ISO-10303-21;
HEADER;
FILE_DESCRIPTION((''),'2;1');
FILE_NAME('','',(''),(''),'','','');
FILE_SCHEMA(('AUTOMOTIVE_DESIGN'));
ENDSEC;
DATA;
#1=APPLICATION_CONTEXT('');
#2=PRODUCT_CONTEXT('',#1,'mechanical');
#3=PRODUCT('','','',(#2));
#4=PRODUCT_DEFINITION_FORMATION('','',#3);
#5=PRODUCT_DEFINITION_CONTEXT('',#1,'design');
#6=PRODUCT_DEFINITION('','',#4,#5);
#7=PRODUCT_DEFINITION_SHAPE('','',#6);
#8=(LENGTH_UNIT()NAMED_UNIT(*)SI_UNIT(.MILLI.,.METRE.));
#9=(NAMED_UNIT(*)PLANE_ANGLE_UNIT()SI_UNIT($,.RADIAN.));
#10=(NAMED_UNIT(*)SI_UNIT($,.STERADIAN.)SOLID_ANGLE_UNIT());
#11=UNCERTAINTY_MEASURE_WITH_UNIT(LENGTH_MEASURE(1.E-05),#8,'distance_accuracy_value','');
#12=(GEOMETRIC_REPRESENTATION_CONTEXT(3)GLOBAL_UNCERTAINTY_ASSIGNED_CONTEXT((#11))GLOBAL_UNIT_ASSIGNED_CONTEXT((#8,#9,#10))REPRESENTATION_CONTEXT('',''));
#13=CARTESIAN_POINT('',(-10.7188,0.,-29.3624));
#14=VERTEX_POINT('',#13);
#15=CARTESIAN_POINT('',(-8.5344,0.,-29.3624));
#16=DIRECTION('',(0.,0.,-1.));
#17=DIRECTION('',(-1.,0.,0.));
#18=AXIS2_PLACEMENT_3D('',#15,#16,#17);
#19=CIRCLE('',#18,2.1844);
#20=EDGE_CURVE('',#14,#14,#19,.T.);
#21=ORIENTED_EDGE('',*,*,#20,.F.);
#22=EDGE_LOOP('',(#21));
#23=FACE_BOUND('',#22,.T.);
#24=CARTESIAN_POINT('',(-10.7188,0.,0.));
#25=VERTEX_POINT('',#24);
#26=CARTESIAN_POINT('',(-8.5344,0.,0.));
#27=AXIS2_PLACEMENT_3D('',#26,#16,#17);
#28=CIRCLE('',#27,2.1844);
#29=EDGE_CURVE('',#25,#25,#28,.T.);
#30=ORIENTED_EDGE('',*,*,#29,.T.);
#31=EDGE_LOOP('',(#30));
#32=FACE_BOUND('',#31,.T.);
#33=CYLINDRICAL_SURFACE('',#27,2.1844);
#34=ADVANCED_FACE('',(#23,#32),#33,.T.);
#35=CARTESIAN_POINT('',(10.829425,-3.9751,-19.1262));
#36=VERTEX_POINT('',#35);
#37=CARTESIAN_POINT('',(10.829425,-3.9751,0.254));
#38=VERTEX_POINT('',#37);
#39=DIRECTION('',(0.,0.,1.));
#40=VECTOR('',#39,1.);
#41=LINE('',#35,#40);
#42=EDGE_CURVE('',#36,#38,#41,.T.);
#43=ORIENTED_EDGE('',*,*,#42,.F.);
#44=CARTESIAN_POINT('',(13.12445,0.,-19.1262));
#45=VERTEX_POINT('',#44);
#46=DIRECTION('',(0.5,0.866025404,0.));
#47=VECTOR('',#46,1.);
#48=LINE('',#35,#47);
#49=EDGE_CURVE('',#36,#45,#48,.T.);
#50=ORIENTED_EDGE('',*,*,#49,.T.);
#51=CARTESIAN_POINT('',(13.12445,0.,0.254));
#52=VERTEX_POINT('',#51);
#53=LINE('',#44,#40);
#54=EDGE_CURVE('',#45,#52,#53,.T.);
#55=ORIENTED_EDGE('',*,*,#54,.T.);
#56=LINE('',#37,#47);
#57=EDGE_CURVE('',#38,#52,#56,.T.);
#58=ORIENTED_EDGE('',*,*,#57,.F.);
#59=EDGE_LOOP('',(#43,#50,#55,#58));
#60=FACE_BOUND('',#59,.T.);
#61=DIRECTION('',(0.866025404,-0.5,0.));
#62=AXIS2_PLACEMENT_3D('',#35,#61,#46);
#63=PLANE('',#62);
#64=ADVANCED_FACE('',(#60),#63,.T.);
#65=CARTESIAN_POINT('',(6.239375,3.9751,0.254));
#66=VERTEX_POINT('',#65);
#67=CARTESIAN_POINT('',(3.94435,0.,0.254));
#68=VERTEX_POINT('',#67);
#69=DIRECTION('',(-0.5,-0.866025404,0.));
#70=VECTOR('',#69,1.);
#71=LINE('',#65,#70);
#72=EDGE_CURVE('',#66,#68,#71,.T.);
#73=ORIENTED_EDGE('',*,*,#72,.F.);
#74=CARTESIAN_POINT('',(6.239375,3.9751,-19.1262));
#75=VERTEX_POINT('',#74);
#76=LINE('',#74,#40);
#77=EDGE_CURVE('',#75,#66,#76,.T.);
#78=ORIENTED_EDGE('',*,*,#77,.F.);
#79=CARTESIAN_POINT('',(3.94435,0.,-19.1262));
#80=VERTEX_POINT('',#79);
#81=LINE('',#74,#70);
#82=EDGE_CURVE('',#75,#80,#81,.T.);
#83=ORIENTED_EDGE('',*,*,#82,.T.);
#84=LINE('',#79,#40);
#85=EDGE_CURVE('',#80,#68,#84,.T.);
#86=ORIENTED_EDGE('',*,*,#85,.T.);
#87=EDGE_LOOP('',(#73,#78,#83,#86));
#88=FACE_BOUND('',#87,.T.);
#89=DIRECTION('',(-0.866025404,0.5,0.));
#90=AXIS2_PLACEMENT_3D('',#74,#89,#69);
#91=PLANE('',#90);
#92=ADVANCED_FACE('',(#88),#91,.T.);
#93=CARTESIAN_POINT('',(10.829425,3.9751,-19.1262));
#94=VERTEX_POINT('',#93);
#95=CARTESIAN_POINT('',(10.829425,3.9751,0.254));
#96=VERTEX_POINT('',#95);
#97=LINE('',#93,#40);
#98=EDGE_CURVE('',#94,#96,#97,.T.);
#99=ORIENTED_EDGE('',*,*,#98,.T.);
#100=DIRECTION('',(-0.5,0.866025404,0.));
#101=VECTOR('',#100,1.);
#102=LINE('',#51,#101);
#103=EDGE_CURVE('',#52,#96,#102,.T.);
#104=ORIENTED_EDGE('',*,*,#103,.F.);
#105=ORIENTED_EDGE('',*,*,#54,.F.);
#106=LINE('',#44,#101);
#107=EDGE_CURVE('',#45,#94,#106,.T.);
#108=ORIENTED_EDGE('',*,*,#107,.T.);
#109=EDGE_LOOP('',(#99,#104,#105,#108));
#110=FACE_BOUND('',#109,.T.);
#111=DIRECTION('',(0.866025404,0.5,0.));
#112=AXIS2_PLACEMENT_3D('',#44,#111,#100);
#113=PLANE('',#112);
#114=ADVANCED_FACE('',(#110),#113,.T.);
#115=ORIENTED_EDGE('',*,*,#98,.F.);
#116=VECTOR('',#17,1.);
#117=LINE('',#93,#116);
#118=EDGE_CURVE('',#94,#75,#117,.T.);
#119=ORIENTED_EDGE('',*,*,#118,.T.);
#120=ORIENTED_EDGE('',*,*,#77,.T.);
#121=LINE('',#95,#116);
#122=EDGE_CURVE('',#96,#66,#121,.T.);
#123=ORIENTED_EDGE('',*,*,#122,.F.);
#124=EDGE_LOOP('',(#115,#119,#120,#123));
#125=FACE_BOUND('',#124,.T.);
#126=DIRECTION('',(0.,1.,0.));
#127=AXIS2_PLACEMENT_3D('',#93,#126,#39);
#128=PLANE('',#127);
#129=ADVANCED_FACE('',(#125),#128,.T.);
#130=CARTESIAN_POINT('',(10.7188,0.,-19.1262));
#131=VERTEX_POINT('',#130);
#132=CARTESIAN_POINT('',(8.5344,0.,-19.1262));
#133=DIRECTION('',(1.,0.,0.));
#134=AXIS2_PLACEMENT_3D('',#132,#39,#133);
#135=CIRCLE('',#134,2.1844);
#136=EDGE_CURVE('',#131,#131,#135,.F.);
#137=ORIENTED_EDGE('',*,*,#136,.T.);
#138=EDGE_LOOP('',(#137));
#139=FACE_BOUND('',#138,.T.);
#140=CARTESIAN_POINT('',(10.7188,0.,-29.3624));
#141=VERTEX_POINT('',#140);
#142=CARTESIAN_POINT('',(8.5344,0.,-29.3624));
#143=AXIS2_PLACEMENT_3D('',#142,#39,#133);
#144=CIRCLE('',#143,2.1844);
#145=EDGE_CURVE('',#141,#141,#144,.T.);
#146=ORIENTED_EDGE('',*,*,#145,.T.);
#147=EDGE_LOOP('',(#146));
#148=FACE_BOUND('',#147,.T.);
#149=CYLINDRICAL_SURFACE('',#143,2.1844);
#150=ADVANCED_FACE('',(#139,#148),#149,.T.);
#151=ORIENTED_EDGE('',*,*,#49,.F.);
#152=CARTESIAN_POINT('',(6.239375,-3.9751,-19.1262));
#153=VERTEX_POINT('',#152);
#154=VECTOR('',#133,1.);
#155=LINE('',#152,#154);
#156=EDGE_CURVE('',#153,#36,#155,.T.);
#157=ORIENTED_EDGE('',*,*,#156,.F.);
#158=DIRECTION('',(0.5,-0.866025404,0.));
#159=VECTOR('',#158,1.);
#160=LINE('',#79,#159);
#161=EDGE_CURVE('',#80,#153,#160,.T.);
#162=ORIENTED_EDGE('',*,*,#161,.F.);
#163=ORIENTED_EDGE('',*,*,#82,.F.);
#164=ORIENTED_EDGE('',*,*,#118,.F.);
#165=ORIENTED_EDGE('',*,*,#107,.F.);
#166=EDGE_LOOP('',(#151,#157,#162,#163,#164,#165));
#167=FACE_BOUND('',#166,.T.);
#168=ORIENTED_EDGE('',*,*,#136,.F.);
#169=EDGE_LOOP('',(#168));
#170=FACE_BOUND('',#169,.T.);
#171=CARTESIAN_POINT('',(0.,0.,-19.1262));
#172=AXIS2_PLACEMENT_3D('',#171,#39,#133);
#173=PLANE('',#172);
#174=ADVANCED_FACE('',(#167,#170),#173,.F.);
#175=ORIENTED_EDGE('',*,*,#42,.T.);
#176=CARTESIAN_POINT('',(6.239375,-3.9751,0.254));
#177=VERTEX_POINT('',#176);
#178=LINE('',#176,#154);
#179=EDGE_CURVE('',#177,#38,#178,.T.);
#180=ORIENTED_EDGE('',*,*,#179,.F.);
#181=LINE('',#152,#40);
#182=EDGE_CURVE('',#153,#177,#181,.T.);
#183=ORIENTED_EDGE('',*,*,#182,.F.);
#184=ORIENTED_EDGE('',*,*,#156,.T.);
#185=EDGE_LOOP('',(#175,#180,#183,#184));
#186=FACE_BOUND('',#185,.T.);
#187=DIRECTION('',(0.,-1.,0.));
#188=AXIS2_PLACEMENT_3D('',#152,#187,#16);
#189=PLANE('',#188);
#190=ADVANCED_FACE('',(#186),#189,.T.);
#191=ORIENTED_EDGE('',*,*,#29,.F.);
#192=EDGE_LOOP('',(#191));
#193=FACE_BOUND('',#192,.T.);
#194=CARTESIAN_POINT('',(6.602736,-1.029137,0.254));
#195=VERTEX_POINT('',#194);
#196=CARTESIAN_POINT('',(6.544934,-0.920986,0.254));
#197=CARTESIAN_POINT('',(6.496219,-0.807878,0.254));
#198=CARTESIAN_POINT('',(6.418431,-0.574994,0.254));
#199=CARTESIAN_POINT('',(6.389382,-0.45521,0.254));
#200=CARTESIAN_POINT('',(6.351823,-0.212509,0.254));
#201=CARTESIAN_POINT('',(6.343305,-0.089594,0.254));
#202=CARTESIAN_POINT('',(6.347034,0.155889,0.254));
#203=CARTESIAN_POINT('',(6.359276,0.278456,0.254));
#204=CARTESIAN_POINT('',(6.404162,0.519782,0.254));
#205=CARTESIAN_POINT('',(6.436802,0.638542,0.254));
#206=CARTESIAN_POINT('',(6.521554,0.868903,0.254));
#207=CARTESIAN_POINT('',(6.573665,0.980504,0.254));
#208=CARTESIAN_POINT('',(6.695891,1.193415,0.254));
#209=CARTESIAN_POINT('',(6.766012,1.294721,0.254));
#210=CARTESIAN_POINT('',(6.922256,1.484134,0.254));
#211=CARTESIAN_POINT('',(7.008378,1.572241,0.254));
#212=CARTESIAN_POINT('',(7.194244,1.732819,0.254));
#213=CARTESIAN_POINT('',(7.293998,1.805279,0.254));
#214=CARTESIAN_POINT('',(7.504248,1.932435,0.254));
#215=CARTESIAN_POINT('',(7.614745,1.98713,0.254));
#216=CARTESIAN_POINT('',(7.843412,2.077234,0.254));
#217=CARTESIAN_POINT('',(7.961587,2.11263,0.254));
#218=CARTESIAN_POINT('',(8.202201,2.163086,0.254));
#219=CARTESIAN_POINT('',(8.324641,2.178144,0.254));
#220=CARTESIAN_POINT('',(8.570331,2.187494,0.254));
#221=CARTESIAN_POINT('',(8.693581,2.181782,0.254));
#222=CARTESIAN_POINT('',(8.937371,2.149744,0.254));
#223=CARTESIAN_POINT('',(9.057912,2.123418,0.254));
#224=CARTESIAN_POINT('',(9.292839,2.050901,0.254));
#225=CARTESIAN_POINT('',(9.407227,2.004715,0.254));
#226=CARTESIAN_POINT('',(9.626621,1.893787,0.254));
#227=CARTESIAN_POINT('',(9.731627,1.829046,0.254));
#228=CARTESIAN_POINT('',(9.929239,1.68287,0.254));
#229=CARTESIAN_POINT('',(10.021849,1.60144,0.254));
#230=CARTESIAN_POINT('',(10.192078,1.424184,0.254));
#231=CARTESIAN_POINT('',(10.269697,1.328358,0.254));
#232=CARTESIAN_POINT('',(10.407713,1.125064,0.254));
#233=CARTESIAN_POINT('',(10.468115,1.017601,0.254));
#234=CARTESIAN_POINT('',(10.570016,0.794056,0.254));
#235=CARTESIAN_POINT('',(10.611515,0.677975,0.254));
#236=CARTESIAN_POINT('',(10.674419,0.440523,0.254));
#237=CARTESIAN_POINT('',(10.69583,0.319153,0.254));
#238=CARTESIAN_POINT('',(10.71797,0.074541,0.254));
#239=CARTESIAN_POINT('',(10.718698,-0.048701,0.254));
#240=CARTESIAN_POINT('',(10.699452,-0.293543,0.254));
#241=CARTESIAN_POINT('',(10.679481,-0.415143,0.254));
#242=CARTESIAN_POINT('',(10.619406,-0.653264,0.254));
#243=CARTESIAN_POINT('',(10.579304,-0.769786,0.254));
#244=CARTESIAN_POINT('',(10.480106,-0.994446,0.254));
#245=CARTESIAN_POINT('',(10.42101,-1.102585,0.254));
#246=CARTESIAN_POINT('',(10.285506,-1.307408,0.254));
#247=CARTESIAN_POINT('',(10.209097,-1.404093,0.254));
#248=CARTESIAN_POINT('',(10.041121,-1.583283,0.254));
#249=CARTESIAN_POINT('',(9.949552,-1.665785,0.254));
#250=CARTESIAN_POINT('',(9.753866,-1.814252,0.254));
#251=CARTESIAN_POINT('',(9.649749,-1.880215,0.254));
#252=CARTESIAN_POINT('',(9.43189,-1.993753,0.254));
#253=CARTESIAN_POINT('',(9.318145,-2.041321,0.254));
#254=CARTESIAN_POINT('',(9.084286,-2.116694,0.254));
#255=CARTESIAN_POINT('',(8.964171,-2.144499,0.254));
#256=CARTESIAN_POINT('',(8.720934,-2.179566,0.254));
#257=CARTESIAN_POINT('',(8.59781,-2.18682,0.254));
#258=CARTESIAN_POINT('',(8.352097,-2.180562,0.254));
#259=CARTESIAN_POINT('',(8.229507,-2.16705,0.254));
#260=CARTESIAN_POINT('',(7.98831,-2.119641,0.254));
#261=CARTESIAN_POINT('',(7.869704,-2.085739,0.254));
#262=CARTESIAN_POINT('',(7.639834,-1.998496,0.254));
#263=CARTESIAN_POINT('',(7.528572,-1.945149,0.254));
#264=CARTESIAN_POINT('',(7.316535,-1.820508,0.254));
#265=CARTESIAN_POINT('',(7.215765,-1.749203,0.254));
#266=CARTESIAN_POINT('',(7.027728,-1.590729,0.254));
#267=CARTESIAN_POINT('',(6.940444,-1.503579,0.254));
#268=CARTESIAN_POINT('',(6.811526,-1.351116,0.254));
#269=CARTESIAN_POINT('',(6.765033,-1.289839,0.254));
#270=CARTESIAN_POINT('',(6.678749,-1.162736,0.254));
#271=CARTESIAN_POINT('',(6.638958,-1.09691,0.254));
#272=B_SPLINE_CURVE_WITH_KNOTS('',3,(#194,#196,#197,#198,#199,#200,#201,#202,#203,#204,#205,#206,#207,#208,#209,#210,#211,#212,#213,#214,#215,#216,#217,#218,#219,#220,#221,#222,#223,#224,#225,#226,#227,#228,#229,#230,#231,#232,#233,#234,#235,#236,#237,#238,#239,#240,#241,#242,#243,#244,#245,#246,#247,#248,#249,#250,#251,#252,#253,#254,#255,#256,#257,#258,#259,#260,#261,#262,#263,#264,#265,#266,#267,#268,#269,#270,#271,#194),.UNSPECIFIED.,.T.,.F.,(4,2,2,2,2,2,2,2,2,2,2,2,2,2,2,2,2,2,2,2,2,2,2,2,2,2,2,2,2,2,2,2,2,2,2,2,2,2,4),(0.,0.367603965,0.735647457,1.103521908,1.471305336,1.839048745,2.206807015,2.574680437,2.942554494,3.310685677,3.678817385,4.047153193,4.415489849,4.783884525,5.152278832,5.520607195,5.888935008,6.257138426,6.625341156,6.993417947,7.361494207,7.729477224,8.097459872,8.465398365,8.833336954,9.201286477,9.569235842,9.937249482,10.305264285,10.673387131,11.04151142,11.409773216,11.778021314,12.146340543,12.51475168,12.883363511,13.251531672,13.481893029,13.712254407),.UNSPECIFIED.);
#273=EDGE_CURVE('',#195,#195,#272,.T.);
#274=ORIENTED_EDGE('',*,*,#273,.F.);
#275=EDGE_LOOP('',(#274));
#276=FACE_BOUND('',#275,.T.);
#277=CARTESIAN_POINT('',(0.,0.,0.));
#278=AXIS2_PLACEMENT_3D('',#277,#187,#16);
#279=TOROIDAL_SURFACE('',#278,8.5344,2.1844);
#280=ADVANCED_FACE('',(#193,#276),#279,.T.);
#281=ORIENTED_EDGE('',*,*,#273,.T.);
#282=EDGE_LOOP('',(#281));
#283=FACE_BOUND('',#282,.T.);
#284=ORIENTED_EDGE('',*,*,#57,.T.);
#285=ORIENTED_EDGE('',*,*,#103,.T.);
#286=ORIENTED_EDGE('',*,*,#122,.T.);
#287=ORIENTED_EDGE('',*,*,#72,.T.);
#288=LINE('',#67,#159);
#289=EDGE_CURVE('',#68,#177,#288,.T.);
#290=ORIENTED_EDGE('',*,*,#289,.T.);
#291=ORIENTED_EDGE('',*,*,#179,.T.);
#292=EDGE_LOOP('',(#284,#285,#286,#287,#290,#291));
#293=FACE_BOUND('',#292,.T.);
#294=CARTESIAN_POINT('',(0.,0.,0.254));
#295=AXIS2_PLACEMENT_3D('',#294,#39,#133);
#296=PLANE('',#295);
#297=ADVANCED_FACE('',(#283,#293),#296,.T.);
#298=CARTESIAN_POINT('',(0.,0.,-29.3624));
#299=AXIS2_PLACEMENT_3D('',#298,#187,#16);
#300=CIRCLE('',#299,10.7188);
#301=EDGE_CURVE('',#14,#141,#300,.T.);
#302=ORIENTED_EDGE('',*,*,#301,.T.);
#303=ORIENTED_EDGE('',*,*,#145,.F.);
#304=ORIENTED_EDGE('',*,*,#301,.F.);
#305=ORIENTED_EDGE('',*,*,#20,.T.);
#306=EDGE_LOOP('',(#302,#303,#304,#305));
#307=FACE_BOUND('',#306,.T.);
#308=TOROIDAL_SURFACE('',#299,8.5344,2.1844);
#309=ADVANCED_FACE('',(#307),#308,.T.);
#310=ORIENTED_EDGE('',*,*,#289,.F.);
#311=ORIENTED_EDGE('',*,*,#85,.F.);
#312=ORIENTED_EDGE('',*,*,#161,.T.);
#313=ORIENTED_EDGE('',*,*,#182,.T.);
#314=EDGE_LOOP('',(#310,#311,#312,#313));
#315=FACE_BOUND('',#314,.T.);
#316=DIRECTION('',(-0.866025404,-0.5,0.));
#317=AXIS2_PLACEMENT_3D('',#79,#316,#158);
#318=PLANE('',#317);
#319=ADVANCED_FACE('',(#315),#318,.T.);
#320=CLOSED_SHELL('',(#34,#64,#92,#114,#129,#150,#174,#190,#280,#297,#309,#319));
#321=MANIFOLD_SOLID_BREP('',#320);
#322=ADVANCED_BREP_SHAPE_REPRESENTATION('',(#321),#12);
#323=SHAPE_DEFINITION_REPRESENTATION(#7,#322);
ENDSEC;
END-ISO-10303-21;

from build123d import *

# Parameters (mm, degrees)
SWEEP1_START             = -29.3624001
SWEEP1_OUTLINE_R         = 2.1844
SWEEP1_DEPTH             = 29.3624001
SWEEP1_2_OUTLINE_R       = 2.1844
SWEEP1_2_ANGLE           = 180
SWEEP1_3_OUTLINE_R       = 2.1844
SWEEP1_3_ANGLE           = 180
BOSS_EXTRUDE1_DEPTH      = 0.254
BOSS_EXTRUDE1_DEPTH_BACK = 19.1262


with BuildPart() as part:
    # Sweep1: read off the stored shape, not the designer's step
    # Sweep1 outline → Sweep1 (new body)
    with BuildSketch(Plane.XY.offset(SWEEP1_START)):
        with Locations((8.5344, 0)):
            Circle(SWEEP1_OUTLINE_R)
        with Locations((-8.5344, 0)):
            Circle(SWEEP1_OUTLINE_R)
    extrude(amount=SWEEP1_DEPTH)

    # Sweep1 2 outline → Sweep1 2 (revolve)
    with BuildSketch(Plane.XY.offset(-29.3624)):
        with Locations((8.5344, 0)):
            Circle(SWEEP1_2_OUTLINE_R)
    revolve(axis=Axis((0, 0, -29.3624), (0, 1, 0)), revolution_arc=SWEEP1_2_ANGLE)

    # Sweep1 3 outline → Sweep1 3 (revolve)
    with BuildSketch(Plane(origin=(0, 0, 0), x_dir=(-1, 0, 0), z_dir=(0, 0, -1))):
        with Locations((8.5344, 0)):
            Circle(SWEEP1_3_OUTLINE_R)
    revolve(axis=Axis((0, 0, 0), (0, 1, 0)), revolution_arc=SWEEP1_3_ANGLE)

    # Sketch2 → Boss-Extrude1 (add, two sides: drawn at the far end of the back side and taken through both)
    with BuildSketch(Plane.XY.offset(-BOSS_EXTRUDE1_DEPTH_BACK)):
        Polygon((13.12445011, 0), (10.829425055, 3.9751), (6.239374945, 3.9751), (3.94434989, 0), (6.239374945, -3.9751), (10.829425055, -3.9751), align=None)
    extrude(amount=BOSS_EXTRUDE1_DEPTH + BOSS_EXTRUDE1_DEPTH_BACK)


solid = part.part
